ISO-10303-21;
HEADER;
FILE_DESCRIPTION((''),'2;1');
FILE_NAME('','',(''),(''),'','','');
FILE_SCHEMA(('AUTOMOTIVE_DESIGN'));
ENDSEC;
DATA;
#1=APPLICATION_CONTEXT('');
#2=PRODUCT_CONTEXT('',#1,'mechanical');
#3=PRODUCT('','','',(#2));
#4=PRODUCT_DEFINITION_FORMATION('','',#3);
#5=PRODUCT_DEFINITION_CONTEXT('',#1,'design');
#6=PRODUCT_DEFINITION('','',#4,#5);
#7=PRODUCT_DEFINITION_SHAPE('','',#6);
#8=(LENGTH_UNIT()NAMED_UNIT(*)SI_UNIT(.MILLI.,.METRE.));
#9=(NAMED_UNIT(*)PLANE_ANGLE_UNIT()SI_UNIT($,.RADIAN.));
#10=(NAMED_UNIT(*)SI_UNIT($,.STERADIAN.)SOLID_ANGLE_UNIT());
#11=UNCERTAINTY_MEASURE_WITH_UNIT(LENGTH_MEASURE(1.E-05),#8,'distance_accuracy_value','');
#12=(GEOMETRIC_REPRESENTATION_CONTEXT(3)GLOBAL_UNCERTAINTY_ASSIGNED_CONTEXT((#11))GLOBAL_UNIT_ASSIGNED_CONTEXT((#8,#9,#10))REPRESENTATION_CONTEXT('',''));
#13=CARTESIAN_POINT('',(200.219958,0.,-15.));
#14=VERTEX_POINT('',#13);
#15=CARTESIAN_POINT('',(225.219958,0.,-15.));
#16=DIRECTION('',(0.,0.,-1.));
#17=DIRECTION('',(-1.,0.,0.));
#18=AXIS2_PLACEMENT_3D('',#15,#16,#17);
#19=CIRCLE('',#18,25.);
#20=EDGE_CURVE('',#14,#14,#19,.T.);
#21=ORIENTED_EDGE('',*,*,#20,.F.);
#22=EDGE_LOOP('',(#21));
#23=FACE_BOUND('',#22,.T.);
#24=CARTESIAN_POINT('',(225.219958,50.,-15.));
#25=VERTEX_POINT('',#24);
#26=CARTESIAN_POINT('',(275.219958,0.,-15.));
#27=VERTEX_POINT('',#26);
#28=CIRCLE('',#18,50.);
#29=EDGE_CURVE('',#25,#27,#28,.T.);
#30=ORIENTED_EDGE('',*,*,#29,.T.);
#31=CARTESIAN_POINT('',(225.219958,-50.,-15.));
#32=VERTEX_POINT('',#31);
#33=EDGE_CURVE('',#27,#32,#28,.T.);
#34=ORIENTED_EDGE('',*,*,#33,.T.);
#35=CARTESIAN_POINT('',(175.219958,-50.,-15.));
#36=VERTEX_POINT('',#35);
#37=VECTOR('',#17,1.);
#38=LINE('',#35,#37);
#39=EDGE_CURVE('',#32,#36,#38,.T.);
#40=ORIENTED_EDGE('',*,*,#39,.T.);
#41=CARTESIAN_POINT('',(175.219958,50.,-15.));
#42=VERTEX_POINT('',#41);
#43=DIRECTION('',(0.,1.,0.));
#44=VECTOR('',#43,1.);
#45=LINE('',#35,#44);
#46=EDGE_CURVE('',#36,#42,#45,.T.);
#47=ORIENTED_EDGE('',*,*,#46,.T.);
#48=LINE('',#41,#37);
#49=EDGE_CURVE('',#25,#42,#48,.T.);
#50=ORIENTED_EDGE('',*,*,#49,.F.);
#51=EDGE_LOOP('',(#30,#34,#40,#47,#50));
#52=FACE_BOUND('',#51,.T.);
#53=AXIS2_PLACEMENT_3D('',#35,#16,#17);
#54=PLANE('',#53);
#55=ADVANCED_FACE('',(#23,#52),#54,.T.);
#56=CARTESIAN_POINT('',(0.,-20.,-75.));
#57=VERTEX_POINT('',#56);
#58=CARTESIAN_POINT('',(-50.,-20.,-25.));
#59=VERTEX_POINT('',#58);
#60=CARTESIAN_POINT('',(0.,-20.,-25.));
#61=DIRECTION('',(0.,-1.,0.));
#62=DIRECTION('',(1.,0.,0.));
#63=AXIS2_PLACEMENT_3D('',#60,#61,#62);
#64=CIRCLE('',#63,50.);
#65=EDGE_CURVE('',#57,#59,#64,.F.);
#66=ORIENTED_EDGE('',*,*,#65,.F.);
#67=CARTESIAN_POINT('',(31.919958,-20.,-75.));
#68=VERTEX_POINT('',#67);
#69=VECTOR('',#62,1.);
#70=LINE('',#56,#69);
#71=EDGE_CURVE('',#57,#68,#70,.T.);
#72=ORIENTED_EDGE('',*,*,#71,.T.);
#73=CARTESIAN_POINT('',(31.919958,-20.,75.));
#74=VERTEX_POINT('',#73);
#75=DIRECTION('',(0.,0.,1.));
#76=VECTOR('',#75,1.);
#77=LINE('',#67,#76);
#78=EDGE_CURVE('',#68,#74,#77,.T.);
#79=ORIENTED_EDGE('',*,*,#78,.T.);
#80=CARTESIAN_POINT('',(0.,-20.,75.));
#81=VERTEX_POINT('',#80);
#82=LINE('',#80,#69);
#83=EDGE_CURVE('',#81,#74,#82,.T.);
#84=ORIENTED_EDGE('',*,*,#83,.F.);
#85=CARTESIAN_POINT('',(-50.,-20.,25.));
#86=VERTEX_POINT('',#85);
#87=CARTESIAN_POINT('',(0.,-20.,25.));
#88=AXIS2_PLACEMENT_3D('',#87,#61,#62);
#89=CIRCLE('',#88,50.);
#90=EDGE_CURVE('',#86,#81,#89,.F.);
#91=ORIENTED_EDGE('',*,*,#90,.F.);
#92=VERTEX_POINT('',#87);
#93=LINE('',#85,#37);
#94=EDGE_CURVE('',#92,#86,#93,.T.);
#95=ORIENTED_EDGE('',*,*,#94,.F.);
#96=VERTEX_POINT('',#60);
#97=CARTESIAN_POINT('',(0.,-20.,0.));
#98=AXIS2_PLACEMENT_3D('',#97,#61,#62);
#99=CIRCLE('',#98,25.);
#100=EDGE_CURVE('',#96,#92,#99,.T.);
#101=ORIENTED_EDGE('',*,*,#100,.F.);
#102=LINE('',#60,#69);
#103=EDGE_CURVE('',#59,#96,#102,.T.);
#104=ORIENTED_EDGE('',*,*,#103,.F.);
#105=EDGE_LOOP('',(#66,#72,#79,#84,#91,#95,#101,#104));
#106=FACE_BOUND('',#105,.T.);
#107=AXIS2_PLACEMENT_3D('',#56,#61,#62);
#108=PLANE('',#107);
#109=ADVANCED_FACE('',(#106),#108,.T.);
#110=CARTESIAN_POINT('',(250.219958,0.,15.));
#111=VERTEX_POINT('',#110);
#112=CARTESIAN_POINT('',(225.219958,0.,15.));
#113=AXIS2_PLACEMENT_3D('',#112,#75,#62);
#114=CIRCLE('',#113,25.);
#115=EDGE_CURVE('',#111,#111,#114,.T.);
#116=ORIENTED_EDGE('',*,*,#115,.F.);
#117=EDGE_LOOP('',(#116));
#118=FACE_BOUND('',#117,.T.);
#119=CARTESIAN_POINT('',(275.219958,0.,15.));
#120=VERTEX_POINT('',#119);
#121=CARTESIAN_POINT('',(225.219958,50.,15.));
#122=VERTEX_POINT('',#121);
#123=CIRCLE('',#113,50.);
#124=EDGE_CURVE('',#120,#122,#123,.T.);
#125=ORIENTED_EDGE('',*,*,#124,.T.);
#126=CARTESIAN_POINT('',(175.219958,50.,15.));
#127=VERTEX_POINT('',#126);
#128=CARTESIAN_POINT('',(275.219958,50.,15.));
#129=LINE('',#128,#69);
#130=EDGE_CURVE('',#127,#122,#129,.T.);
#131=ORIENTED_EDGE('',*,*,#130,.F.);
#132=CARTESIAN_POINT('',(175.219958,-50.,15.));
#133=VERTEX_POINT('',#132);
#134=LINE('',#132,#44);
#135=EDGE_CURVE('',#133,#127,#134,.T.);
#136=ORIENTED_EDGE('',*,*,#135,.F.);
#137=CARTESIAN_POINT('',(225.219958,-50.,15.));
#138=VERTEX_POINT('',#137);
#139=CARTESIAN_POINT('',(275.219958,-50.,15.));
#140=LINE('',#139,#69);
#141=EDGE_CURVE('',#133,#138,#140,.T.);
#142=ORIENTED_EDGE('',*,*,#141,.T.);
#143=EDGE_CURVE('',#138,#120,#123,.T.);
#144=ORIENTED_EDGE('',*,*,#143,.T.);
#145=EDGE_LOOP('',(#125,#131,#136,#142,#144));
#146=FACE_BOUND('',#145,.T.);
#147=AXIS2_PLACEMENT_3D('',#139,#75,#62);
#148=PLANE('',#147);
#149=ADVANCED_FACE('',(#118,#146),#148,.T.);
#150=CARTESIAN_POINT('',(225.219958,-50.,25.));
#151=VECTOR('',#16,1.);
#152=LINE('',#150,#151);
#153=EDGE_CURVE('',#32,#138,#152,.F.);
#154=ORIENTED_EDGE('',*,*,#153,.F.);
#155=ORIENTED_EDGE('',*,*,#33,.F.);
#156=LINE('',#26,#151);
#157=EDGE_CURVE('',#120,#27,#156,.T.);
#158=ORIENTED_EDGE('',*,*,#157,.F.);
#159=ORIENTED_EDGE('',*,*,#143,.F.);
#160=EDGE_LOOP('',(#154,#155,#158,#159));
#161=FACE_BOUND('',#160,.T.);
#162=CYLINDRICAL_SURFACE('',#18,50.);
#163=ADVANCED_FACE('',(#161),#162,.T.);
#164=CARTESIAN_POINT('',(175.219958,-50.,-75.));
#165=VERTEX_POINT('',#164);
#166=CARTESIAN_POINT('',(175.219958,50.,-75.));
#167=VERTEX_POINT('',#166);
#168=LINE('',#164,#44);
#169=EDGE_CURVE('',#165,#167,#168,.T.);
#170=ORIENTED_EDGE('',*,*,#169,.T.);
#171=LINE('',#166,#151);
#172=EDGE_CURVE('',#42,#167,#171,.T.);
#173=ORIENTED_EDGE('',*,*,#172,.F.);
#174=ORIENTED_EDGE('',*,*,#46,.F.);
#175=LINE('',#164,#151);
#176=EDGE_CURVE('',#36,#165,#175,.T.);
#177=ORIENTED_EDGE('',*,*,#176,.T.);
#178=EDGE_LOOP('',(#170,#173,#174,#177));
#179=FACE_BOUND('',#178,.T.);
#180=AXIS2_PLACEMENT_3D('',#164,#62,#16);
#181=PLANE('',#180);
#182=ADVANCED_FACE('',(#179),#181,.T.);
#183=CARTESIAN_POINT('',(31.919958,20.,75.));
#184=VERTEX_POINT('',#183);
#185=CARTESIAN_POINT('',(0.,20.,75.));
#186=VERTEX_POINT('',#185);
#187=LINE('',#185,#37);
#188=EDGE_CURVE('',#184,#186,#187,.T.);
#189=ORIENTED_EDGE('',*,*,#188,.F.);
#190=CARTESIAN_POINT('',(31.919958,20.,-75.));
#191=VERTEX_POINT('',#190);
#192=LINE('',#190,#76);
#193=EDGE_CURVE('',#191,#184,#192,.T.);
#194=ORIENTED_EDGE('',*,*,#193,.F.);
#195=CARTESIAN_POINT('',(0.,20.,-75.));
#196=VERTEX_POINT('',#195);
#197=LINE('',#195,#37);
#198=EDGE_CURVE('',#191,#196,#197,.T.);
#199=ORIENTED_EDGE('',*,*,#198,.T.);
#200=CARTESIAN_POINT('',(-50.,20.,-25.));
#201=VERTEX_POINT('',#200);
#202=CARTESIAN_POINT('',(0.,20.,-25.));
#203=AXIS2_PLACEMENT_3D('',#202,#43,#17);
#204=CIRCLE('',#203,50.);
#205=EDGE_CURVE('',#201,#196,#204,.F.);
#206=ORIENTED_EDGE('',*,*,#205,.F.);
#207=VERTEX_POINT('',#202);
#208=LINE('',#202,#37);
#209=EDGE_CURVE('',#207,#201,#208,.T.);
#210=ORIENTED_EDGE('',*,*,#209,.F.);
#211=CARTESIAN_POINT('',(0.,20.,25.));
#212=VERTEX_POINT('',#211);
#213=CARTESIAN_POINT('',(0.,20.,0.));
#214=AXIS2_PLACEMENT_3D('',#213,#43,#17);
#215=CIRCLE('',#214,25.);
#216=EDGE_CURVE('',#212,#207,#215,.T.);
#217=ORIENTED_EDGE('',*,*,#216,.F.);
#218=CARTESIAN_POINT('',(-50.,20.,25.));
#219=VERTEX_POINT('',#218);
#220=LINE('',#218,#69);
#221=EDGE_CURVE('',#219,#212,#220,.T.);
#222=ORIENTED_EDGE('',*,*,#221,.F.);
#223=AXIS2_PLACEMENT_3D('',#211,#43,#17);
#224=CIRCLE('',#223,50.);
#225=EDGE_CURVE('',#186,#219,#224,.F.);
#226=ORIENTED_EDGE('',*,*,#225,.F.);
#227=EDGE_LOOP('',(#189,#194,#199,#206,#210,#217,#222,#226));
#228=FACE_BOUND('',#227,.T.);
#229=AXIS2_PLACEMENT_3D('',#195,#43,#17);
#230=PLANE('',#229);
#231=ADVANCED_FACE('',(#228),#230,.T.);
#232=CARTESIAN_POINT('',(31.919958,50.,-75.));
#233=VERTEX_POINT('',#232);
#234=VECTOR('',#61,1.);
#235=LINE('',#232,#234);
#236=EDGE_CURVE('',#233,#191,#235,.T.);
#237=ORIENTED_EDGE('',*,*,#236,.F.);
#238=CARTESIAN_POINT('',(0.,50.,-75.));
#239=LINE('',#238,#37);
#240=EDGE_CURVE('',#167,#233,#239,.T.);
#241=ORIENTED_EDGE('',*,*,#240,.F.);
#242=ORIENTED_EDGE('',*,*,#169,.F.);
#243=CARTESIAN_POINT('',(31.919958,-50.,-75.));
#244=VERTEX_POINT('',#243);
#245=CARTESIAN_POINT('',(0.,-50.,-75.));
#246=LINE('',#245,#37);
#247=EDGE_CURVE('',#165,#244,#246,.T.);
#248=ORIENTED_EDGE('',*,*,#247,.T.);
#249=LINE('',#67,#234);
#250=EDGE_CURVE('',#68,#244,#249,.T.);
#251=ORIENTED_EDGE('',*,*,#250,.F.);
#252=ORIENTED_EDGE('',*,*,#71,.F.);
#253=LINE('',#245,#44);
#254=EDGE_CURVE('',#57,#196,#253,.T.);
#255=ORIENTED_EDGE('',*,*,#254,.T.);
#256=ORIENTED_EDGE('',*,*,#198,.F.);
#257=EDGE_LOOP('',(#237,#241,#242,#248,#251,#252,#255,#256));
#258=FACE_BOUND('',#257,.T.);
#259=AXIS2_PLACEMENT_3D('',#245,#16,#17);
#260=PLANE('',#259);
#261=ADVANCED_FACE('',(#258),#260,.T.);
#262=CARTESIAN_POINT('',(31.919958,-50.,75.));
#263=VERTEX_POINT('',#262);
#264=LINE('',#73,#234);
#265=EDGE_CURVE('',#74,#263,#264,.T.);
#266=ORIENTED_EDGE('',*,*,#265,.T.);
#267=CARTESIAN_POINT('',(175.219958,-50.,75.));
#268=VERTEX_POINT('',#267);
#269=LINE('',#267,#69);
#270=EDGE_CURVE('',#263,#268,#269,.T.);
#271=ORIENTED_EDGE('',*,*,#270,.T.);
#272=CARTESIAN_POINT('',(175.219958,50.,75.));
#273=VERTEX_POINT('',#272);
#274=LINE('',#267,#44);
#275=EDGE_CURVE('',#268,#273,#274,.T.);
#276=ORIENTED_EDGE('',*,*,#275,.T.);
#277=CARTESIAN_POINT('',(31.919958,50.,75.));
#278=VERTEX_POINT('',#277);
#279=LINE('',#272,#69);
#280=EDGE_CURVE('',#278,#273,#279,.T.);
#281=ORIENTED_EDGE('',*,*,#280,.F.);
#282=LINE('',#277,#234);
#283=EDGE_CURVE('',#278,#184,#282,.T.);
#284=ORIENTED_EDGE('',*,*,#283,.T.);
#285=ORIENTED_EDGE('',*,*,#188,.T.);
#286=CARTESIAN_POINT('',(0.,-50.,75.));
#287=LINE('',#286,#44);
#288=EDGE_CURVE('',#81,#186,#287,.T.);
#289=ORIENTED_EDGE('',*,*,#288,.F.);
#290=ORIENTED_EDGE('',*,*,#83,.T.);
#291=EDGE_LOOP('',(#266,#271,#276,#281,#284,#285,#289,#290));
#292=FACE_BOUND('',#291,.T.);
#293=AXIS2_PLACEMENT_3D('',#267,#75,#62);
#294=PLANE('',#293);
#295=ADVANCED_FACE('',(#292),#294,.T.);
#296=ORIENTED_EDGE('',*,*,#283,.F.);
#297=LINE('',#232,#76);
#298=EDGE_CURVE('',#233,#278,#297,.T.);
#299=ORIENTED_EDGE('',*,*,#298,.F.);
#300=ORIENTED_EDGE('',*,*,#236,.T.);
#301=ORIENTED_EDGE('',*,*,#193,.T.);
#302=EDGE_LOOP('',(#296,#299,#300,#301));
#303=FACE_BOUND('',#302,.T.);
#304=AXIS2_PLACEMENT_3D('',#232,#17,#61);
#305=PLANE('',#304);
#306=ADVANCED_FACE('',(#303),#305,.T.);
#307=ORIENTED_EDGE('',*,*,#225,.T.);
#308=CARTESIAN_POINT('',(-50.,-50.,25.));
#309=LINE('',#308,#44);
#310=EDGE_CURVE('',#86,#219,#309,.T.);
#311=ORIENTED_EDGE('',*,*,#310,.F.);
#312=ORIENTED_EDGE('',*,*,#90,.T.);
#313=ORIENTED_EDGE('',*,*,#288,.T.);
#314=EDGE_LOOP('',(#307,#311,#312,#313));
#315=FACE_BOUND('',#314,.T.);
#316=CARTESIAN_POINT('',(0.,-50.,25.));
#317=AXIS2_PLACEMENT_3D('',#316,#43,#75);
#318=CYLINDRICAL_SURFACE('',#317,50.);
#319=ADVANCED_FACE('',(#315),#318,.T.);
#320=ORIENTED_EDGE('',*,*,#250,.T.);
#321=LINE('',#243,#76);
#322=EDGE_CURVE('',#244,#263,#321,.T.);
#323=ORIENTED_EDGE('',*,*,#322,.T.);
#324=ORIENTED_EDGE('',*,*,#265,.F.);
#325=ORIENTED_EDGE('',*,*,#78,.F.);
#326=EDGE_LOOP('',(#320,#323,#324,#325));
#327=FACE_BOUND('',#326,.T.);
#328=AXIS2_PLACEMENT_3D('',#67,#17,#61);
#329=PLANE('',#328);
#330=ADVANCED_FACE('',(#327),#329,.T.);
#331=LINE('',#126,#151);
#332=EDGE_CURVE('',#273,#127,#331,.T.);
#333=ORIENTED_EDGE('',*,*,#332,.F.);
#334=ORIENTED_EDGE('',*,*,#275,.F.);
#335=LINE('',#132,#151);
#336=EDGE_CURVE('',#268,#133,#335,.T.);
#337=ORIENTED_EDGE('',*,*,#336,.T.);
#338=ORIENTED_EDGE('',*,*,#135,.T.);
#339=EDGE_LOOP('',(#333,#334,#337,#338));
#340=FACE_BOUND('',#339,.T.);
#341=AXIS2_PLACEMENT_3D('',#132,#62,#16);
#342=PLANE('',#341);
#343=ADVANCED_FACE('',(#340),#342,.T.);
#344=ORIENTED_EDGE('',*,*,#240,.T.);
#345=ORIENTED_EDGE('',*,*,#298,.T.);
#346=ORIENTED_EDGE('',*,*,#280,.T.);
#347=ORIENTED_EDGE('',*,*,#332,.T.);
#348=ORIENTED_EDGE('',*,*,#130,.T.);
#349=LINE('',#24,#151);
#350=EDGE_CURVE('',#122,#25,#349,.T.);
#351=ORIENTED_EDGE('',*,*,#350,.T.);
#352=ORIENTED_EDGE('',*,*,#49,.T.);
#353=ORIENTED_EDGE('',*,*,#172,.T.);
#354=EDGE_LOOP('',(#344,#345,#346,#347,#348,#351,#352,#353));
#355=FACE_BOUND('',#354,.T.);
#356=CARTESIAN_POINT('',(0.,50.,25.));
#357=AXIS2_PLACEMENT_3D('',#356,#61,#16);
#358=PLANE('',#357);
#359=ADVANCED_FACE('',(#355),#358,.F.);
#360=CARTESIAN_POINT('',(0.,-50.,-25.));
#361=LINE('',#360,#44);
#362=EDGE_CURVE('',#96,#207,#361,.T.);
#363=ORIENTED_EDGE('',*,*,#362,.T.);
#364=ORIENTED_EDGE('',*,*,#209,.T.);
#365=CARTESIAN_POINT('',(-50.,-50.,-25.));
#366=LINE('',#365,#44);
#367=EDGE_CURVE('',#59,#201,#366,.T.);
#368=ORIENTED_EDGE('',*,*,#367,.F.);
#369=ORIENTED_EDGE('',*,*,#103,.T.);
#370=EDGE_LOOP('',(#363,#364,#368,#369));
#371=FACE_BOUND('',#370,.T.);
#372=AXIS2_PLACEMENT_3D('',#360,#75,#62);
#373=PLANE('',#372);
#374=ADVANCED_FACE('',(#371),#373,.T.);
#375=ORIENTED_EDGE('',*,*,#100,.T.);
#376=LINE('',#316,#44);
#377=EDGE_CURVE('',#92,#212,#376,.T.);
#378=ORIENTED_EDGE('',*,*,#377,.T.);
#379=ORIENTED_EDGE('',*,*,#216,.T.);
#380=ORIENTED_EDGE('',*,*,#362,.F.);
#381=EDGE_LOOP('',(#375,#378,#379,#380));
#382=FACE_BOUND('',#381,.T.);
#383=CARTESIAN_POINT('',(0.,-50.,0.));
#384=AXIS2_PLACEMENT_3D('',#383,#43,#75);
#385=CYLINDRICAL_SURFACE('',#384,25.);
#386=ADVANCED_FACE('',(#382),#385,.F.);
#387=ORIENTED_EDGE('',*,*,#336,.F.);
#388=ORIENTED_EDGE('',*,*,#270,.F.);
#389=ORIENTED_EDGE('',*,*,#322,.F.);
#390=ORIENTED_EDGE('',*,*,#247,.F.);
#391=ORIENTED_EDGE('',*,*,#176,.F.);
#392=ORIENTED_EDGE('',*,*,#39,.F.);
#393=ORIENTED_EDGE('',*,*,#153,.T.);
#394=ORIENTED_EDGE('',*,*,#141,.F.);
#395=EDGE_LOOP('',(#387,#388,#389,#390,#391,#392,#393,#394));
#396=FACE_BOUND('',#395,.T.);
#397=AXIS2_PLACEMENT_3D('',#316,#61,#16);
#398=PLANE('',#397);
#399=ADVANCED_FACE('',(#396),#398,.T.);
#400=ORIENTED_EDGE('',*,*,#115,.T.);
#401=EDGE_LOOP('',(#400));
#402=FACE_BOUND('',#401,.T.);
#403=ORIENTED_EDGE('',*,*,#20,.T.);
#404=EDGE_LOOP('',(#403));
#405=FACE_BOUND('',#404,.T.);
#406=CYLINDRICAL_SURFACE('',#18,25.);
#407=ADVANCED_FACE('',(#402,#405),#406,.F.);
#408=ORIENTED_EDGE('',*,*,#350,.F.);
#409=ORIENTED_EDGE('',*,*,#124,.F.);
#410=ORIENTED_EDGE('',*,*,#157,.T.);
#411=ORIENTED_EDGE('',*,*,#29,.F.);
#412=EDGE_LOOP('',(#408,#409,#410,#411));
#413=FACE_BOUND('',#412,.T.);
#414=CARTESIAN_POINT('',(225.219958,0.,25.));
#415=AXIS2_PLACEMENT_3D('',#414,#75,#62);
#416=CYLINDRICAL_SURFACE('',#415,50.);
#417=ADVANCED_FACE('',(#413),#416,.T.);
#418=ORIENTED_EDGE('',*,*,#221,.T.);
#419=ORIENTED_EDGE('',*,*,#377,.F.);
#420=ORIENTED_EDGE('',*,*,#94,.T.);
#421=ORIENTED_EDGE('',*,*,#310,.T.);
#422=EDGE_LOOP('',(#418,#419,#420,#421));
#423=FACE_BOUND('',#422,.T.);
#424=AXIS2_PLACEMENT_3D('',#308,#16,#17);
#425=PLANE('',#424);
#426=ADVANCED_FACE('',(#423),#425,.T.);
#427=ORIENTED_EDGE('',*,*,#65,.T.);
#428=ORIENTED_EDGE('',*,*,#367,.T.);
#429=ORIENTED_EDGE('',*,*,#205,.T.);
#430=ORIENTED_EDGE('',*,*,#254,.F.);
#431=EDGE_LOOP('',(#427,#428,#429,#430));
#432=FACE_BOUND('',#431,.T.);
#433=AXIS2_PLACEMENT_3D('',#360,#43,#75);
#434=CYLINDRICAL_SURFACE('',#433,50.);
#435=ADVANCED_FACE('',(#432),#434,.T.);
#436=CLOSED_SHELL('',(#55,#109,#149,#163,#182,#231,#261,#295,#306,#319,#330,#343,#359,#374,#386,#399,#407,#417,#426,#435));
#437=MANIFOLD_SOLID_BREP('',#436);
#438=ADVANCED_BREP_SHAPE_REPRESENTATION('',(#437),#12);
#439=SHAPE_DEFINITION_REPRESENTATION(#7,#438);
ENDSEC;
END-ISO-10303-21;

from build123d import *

# Parameters (mm, degrees)
BOSS_EXTRUDE1_DEPTH      = 50
BOSS_EXTRUDE1_DEPTH_BACK = 50
FILLET1_R                = 50
CUT_EXTRUDE1_DEPTH       = 298.062325719
CUT_EXTRUDE1_DEPTH_BACK  = 298.062325719
HOLE1_D                  = 50


with BuildPart() as part:
    # Sketch1 → Boss-Extrude1 (new, two sides: drawn at the far end of the back side and taken through both)
    with BuildSketch(Plane(origin=(0, 0, 0), x_dir=(1, 0, 0), z_dir=(0, 1, 0)).offset(-BOSS_EXTRUDE1_DEPTH_BACK)):
        with BuildLine():
            Line((-50, -25), (0, -25))
            ThreePointArc((0, -25), (25, 0), (0, 25))
            Line((0, 25), (-50, 25))
            ThreePointArc((-50, 25), (-35.355339059, 60.355339059), (0, 75))
            Line((0, 75), (175.219958145, 75))
            Line((175.219958145, 75), (175.219958145, 15))
            Line((175.219958145, 15), (275.219958145, 15))
            Line((275.219958145, 15), (275.219958145, -15))
            Line((275.219958145, -15), (175.219958145, -15))
            Line((175.219958145, -15), (175.219958145, -75))
            Line((175.219958145, -75), (0, -75))
            ThreePointArc((0, -75), (-35.355339059, -60.355339059), (-50, -25))
        make_face()
    extrude(amount=BOSS_EXTRUDE1_DEPTH + BOSS_EXTRUDE1_DEPTH_BACK)

    # Fillet1
    fillet1_edges = [part.edges().sort_by_distance(p)[0] for p in [
        (275.219958145, 50, 0),
        (275.219958145, -50, 0),
    ]]
    fillet(fillet1_edges, radius=FILLET1_R - 0.0001)  # a hair under: the kernel refuses the full size

    # Sketch4 → Cut-Extrude1 (cut, two sides: drawn at the far end of the back side and taken through both)
    with BuildSketch(Plane(origin=(0, 0, 25), x_dir=(-1, 0, 0), z_dir=(0, 0, -1)).offset(-CUT_EXTRUDE1_DEPTH_BACK)):
        Polygon((0, 20), (50, 20), (50, 50), (0, 50), (-31.919958145, 50), (-31.919958145, 20), align=None)
        Polygon((0, -20), (50, -20), (50, -50), (0, -50), (-31.919958145, -50), (-31.919958145, -20), align=None)
    extrude(amount=CUT_EXTRUDE1_DEPTH + CUT_EXTRUDE1_DEPTH_BACK, mode=Mode.SUBTRACT)

    # Hole1 (through all)
    with Locations(Plane(origin=(0, 0, -15), x_dir=(-1, 0, 0), z_dir=(0, 0, -1))):
        with Locations((-225.219958145, 0)):
            Hole(HOLE1_D / 2)


solid = part.part
